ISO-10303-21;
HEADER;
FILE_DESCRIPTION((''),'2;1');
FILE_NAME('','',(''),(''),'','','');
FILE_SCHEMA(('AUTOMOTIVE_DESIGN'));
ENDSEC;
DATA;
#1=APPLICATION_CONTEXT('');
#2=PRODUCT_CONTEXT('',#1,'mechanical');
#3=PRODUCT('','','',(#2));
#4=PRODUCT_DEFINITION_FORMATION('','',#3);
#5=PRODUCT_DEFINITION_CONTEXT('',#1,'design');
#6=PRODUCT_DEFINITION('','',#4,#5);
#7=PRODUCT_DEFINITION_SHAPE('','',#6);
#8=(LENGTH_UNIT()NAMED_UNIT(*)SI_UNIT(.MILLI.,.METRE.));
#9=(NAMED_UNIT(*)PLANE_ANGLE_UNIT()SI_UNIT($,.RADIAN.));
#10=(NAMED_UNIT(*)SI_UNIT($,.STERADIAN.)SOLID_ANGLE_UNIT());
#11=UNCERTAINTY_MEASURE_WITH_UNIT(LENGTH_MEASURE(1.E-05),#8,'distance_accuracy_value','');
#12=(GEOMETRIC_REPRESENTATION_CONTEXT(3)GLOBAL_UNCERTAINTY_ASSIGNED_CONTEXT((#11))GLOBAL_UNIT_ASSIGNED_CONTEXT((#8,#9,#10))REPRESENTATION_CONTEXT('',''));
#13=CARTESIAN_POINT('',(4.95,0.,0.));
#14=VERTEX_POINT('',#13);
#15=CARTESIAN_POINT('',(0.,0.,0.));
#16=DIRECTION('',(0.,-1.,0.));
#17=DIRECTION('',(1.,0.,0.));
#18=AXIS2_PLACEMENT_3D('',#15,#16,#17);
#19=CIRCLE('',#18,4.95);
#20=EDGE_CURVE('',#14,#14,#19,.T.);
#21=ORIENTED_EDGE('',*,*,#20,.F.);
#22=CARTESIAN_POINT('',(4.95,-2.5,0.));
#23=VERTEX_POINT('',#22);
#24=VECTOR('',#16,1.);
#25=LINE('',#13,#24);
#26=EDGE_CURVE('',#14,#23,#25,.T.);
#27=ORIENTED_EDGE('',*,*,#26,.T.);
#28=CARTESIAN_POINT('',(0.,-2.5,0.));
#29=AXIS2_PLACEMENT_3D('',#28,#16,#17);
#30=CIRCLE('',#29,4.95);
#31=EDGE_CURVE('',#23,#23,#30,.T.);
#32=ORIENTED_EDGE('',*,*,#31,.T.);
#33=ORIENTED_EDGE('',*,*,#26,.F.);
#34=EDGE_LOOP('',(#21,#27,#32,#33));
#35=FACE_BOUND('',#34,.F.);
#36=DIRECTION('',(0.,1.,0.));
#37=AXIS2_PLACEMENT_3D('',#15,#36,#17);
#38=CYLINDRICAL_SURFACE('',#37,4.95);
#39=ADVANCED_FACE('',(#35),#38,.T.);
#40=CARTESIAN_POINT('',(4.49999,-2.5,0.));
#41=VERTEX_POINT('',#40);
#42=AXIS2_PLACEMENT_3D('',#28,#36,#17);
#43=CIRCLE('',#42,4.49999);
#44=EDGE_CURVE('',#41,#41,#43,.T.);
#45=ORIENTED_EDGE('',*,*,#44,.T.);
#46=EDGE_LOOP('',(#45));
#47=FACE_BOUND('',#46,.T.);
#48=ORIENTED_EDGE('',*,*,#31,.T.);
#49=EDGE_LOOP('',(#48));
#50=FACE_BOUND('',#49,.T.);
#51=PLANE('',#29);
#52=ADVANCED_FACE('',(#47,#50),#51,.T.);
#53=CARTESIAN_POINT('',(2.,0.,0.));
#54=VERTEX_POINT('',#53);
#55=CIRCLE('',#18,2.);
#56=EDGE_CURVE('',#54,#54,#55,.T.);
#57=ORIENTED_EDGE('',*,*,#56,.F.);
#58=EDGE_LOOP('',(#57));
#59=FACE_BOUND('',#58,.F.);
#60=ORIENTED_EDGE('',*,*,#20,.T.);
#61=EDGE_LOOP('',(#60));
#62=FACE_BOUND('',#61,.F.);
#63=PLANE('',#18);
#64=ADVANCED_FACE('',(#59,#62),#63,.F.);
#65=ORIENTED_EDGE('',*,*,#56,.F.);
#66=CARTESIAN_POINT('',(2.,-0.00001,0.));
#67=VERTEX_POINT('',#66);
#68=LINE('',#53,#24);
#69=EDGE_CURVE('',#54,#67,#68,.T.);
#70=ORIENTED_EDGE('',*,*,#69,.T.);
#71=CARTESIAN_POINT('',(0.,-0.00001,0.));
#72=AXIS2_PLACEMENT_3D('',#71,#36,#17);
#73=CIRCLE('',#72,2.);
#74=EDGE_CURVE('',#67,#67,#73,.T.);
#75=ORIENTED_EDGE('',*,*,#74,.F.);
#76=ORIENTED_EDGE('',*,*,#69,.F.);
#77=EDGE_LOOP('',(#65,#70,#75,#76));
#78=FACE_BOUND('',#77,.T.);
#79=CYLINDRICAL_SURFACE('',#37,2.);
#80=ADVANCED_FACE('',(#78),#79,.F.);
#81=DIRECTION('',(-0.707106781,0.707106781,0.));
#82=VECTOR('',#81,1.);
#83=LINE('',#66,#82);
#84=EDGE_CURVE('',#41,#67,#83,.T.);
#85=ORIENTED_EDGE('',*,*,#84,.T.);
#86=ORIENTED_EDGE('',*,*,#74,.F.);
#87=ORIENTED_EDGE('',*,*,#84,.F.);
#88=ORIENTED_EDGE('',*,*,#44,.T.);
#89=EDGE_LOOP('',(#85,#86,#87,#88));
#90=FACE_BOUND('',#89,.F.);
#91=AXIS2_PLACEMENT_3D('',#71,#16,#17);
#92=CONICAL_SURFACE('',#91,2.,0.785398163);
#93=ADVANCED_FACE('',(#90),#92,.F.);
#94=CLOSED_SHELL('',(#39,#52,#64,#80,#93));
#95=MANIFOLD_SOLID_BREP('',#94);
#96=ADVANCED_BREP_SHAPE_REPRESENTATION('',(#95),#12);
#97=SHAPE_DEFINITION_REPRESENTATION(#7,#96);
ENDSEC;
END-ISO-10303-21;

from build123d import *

# Parameters (mm, degrees)
F0_R     = 4.95
F0_R_2   = 3.85
F0_R_3   = 2
F1_DEPTH = 2.5
F2_DEPTH = 3.19
F3_SIZE2 = 2.49999
F3_SIZE  = 2.49999


# Not quite as in the source:
# - a fillet or chamfer is up to 0.001 mm smaller than in the source, because OpenCascade refuses the exact size


with BuildPart() as f1:
    # F0 (on Front) → F1 (new body)
    with BuildSketch(Plane.XZ):
        Circle(F0_R)
        Circle(F0_R_2, mode=Mode.SUBTRACT)
        Circle(F0_R_2)
        Circle(F0_R_3, mode=Mode.SUBTRACT)
        Circle(F0_R_3)
    extrude(amount=F1_DEPTH)

    # F0 (on Front) → F2 (cut)
    with BuildSketch(Plane.XZ):
        Circle(F0_R_3)
    extrude(amount=F2_DEPTH, mode=Mode.SUBTRACT)

    # F3 (size 2.5 and 2.5 in the source; OpenCascade refuses exactly that, so slightly less here)
    f3_edges = [f1.edges().sort_by_distance(p)[0] for p in [
        (-2, -2.5, 0),
    ]]
    chamfer(f3_edges, length=F3_SIZE, length2=F3_SIZE2)


solid = f1.part
